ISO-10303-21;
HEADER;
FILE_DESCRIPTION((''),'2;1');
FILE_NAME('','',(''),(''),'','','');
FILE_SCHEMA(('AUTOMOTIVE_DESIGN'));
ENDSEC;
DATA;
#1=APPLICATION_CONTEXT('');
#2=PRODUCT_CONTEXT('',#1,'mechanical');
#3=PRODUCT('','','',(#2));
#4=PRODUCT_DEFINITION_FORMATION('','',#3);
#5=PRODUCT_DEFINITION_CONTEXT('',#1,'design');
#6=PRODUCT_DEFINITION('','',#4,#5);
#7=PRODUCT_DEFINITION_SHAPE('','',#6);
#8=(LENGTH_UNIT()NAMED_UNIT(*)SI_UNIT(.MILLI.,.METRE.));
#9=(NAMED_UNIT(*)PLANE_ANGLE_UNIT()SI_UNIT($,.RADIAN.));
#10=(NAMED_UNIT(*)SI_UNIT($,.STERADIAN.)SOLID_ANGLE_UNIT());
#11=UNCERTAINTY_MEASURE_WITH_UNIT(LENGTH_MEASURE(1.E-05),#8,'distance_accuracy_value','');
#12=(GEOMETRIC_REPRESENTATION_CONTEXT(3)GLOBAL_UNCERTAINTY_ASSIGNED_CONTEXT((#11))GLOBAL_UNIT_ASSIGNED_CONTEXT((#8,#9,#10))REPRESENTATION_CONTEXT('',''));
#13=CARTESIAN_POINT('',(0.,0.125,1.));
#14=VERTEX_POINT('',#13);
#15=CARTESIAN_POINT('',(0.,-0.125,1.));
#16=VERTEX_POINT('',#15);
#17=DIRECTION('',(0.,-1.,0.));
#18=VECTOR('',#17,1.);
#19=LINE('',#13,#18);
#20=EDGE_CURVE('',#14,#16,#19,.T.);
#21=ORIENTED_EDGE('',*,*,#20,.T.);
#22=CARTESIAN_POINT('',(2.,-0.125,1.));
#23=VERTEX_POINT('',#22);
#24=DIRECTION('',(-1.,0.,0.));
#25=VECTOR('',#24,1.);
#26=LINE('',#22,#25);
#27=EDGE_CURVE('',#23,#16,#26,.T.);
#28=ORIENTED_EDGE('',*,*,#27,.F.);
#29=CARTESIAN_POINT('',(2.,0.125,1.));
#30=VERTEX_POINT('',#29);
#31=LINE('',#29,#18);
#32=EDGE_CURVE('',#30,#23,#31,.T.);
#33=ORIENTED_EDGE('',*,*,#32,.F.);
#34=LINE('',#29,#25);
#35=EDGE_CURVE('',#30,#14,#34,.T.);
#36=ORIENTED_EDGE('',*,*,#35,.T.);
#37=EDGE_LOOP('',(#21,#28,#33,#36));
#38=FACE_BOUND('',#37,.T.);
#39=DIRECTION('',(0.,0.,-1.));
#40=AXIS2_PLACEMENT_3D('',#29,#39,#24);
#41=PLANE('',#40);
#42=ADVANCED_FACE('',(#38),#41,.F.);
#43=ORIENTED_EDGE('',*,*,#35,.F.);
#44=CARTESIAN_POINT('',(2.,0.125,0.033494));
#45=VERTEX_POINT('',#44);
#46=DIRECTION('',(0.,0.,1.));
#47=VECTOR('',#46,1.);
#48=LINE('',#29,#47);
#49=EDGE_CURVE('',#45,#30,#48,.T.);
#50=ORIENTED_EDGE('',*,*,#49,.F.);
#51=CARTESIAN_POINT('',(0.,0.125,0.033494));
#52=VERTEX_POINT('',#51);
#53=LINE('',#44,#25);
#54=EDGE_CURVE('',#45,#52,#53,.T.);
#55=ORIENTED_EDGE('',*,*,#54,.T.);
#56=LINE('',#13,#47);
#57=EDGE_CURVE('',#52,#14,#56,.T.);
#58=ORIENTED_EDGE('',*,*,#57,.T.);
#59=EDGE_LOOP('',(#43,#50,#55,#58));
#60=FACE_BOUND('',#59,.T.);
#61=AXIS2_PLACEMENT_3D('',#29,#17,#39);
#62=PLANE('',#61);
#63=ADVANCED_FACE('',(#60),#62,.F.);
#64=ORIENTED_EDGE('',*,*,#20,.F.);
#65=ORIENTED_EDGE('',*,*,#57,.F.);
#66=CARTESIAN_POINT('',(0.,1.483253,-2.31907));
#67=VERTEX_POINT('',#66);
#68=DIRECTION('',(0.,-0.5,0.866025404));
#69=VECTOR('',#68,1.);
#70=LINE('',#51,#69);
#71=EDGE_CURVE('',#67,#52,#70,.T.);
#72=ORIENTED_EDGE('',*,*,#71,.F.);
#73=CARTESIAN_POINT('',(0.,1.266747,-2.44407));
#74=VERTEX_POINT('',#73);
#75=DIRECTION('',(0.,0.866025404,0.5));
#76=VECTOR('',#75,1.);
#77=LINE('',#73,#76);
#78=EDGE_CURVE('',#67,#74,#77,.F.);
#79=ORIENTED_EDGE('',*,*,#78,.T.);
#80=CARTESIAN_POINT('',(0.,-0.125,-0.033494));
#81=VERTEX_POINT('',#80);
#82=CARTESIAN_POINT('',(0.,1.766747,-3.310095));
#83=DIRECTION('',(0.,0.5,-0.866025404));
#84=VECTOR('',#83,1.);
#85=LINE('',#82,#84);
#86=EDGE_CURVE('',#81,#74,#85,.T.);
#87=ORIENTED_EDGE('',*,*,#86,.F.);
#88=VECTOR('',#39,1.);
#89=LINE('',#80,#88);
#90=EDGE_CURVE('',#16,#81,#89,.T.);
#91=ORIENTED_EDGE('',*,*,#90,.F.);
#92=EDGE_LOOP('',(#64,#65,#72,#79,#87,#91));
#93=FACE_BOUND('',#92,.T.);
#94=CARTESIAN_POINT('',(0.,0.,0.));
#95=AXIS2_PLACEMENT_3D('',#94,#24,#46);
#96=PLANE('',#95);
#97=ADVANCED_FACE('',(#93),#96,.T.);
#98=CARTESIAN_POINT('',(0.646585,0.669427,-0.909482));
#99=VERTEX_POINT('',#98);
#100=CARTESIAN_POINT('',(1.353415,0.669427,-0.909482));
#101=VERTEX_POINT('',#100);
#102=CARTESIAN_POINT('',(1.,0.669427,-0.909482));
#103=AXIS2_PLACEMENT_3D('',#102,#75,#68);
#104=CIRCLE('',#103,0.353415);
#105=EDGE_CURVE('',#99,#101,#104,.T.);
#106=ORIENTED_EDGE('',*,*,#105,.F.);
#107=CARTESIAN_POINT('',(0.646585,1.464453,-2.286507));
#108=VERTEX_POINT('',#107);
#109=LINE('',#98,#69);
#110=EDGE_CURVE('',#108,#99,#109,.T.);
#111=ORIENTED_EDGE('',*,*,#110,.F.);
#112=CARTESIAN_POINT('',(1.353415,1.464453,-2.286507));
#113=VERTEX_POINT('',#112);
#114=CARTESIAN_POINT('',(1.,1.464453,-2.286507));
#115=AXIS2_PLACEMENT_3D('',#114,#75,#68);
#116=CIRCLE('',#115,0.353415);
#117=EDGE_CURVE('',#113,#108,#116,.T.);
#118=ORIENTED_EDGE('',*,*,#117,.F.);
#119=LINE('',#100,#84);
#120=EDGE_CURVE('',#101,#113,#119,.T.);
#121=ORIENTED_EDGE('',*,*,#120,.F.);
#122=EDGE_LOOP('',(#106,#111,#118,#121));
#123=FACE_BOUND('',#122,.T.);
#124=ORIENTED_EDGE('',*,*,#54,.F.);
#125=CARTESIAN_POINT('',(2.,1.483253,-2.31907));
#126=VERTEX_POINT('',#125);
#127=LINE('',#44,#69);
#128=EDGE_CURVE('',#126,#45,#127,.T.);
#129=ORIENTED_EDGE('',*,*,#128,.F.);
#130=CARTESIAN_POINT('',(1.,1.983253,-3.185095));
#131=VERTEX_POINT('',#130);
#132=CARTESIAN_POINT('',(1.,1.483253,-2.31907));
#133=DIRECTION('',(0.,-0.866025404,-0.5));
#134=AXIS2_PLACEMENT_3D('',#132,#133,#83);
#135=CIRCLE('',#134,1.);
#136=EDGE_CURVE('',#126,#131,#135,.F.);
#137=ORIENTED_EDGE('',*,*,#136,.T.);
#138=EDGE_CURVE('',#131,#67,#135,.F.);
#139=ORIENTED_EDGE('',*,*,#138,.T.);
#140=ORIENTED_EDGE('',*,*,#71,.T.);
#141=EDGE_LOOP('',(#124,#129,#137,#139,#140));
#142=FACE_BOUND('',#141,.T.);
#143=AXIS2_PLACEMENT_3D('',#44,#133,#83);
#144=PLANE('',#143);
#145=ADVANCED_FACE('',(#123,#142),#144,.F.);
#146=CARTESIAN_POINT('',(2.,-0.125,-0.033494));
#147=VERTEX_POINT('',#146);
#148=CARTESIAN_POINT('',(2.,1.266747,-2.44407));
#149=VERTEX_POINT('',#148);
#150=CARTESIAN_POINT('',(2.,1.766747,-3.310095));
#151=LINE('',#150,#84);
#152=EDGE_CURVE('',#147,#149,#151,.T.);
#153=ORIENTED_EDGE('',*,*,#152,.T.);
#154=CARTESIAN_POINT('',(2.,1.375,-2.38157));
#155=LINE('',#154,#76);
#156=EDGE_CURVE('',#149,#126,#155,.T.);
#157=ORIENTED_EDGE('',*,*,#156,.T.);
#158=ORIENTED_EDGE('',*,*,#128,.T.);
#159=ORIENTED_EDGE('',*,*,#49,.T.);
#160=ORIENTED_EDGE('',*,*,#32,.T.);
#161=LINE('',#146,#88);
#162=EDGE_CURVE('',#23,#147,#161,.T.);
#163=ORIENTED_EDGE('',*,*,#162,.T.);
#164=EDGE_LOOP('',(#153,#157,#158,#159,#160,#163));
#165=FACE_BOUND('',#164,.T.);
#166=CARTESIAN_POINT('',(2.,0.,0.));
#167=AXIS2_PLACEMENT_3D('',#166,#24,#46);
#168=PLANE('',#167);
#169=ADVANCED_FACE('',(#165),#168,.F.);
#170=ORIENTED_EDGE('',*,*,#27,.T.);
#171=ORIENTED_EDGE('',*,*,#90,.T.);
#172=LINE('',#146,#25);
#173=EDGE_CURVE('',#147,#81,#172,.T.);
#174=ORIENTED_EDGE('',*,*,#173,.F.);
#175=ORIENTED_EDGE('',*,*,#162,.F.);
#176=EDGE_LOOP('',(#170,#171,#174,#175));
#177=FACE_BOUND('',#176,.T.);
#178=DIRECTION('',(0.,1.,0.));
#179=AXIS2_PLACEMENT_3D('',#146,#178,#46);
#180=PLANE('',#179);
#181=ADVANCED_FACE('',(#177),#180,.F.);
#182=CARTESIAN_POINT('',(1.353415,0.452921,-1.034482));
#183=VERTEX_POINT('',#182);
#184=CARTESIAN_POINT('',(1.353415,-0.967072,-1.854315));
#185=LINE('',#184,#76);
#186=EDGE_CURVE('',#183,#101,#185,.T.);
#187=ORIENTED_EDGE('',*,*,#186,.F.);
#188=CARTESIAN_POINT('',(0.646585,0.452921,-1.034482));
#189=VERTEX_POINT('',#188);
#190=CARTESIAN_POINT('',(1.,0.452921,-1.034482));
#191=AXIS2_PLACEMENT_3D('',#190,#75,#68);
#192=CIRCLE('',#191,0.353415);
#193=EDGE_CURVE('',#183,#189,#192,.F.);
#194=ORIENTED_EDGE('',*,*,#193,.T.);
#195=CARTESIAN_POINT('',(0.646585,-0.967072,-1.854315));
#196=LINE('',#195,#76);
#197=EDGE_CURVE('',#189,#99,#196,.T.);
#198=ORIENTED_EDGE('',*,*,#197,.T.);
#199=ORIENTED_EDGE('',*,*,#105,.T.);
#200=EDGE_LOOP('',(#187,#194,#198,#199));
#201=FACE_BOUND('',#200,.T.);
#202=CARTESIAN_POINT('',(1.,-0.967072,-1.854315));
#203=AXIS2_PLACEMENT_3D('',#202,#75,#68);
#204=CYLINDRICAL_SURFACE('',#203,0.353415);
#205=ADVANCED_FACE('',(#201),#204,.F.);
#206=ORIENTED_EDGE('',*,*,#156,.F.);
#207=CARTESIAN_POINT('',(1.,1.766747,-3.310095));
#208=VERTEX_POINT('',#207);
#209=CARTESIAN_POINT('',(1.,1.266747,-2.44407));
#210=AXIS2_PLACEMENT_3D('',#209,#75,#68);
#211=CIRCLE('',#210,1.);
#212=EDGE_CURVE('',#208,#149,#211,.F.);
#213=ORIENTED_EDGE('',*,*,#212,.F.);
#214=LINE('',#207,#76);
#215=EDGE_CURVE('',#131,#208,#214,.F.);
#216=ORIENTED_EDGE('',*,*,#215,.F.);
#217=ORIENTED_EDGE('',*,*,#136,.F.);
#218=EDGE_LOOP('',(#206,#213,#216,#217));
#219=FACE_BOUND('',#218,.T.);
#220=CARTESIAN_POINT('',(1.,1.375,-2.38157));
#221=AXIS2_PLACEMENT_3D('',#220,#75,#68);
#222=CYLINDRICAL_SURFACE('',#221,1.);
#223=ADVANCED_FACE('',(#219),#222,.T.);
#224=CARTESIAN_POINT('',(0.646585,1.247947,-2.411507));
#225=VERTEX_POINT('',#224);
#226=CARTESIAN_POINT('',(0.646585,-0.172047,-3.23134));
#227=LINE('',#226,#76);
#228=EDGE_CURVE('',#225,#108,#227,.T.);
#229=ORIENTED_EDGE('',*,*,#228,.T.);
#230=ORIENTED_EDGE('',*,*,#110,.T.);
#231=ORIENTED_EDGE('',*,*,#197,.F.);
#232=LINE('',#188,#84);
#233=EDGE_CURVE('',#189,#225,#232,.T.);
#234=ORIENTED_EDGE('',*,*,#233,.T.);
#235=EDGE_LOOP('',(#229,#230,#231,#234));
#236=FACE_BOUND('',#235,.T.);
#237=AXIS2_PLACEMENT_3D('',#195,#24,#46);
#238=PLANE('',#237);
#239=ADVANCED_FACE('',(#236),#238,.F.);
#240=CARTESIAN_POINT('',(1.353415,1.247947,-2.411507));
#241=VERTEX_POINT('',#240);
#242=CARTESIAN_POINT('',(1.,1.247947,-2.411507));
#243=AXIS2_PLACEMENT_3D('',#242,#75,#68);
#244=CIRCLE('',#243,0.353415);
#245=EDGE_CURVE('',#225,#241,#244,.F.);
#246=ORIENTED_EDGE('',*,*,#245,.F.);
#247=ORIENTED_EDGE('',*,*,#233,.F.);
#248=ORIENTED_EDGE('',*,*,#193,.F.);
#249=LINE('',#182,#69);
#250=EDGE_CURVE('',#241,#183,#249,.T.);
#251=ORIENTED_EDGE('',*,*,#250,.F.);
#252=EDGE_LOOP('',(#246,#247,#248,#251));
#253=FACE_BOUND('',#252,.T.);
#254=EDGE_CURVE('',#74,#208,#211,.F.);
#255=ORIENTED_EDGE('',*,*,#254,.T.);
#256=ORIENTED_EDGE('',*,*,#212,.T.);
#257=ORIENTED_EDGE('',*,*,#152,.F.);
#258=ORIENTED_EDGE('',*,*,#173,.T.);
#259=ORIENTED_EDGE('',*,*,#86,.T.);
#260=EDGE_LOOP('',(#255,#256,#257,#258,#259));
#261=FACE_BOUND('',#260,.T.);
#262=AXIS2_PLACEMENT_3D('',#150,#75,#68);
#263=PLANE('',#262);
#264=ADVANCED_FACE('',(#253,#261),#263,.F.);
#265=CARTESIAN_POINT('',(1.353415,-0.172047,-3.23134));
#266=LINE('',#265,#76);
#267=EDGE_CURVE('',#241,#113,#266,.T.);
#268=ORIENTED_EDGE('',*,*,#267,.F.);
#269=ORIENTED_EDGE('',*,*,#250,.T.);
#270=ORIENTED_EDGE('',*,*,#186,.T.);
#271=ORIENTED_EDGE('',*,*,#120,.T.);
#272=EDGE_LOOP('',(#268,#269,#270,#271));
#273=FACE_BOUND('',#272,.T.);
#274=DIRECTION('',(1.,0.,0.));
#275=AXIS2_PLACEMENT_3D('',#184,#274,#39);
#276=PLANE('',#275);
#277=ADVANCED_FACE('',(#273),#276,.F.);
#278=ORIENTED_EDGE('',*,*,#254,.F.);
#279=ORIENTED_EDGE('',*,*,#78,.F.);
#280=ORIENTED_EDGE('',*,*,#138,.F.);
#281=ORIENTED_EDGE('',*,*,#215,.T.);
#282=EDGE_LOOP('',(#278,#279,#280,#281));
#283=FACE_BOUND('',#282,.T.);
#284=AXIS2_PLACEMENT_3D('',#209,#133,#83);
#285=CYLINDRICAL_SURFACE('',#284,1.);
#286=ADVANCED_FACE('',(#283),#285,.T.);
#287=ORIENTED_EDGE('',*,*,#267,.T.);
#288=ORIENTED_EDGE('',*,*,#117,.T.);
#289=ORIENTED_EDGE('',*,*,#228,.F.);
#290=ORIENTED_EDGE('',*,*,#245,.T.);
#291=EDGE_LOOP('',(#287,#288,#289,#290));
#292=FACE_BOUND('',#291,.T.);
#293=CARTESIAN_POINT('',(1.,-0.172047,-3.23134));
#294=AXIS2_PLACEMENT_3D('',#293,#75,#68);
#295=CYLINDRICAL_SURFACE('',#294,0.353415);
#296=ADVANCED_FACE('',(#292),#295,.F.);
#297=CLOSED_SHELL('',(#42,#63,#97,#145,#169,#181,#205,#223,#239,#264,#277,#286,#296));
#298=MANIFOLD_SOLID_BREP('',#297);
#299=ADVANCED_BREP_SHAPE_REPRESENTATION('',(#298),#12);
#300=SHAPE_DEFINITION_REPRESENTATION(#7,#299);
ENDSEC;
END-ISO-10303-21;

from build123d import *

# Parameters (mm, degrees)
SALIENTE_EXTRUIR3_DEPTH = 2
REDONDEO2_R             = 1
CORTAR_EXTRUIR1_REACH   = 6.346


with BuildPart() as part:
    # Croquis9 → Saliente-Extruir3 (new body)
    with BuildSketch(Plane(origin=(0, 0, 0), x_dir=(0, 0, -1), z_dir=(1, 0, 0))):
        Polygon((3.310095264, 1.766746825), (3.185095264, 1.983253175), (-0.033493649, 0.125), (-1, 0.125), (-1, -0.125), (0.033493649, -0.125), align=None)
    extrude(amount=SALIENTE_EXTRUIR3_DEPTH)

    # Redondeo2
    redondeo2_edges = [part.edges().sort_by_distance(p)[0] for p in [
        (0, 1.875, -3.247595264),
        (2, 1.875, -3.247595264),
    ]]
    fillet(redondeo2_edges, radius=REDONDEO2_R - 0.0001)  # a hair under: the kernel refuses the full size

    # Croquis10 → Cortar-Extruir1 (cut, up to next)
    with BuildSketch(Plane(origin=(0, 0.108253175, 0.0625), x_dir=(1, 0, 0), z_dir=(0, 0.8660254037844386, 0.4999999999999999)), mode=Mode.PRIVATE) as cortar_extruir1_sk1:
        with BuildLine():
            Line((0.646584864, 1.122348106), (0.646584864, 2.712399563))
            ThreePointArc((0.646584864, 2.712399563), (1, 3.065814699), (1.353415136, 2.712399563))
            Line((1.353415136, 2.712399563), (1.353415136, 1.122348106))
            ThreePointArc((1.353415136, 1.122348106), (1, 0.76893297), (0.646584864, 1.122348106))
        make_face()
    cortar_extruir1_tool1 = extrude(cortar_extruir1_sk1.sketch, amount=-CORTAR_EXTRUIR1_REACH, mode=Mode.PRIVATE) & part.part
    add(cortar_extruir1_tool1.solids().sort_by_distance((1, 1.06694, -1.597994))[0], mode=Mode.SUBTRACT)


solid = part.part
